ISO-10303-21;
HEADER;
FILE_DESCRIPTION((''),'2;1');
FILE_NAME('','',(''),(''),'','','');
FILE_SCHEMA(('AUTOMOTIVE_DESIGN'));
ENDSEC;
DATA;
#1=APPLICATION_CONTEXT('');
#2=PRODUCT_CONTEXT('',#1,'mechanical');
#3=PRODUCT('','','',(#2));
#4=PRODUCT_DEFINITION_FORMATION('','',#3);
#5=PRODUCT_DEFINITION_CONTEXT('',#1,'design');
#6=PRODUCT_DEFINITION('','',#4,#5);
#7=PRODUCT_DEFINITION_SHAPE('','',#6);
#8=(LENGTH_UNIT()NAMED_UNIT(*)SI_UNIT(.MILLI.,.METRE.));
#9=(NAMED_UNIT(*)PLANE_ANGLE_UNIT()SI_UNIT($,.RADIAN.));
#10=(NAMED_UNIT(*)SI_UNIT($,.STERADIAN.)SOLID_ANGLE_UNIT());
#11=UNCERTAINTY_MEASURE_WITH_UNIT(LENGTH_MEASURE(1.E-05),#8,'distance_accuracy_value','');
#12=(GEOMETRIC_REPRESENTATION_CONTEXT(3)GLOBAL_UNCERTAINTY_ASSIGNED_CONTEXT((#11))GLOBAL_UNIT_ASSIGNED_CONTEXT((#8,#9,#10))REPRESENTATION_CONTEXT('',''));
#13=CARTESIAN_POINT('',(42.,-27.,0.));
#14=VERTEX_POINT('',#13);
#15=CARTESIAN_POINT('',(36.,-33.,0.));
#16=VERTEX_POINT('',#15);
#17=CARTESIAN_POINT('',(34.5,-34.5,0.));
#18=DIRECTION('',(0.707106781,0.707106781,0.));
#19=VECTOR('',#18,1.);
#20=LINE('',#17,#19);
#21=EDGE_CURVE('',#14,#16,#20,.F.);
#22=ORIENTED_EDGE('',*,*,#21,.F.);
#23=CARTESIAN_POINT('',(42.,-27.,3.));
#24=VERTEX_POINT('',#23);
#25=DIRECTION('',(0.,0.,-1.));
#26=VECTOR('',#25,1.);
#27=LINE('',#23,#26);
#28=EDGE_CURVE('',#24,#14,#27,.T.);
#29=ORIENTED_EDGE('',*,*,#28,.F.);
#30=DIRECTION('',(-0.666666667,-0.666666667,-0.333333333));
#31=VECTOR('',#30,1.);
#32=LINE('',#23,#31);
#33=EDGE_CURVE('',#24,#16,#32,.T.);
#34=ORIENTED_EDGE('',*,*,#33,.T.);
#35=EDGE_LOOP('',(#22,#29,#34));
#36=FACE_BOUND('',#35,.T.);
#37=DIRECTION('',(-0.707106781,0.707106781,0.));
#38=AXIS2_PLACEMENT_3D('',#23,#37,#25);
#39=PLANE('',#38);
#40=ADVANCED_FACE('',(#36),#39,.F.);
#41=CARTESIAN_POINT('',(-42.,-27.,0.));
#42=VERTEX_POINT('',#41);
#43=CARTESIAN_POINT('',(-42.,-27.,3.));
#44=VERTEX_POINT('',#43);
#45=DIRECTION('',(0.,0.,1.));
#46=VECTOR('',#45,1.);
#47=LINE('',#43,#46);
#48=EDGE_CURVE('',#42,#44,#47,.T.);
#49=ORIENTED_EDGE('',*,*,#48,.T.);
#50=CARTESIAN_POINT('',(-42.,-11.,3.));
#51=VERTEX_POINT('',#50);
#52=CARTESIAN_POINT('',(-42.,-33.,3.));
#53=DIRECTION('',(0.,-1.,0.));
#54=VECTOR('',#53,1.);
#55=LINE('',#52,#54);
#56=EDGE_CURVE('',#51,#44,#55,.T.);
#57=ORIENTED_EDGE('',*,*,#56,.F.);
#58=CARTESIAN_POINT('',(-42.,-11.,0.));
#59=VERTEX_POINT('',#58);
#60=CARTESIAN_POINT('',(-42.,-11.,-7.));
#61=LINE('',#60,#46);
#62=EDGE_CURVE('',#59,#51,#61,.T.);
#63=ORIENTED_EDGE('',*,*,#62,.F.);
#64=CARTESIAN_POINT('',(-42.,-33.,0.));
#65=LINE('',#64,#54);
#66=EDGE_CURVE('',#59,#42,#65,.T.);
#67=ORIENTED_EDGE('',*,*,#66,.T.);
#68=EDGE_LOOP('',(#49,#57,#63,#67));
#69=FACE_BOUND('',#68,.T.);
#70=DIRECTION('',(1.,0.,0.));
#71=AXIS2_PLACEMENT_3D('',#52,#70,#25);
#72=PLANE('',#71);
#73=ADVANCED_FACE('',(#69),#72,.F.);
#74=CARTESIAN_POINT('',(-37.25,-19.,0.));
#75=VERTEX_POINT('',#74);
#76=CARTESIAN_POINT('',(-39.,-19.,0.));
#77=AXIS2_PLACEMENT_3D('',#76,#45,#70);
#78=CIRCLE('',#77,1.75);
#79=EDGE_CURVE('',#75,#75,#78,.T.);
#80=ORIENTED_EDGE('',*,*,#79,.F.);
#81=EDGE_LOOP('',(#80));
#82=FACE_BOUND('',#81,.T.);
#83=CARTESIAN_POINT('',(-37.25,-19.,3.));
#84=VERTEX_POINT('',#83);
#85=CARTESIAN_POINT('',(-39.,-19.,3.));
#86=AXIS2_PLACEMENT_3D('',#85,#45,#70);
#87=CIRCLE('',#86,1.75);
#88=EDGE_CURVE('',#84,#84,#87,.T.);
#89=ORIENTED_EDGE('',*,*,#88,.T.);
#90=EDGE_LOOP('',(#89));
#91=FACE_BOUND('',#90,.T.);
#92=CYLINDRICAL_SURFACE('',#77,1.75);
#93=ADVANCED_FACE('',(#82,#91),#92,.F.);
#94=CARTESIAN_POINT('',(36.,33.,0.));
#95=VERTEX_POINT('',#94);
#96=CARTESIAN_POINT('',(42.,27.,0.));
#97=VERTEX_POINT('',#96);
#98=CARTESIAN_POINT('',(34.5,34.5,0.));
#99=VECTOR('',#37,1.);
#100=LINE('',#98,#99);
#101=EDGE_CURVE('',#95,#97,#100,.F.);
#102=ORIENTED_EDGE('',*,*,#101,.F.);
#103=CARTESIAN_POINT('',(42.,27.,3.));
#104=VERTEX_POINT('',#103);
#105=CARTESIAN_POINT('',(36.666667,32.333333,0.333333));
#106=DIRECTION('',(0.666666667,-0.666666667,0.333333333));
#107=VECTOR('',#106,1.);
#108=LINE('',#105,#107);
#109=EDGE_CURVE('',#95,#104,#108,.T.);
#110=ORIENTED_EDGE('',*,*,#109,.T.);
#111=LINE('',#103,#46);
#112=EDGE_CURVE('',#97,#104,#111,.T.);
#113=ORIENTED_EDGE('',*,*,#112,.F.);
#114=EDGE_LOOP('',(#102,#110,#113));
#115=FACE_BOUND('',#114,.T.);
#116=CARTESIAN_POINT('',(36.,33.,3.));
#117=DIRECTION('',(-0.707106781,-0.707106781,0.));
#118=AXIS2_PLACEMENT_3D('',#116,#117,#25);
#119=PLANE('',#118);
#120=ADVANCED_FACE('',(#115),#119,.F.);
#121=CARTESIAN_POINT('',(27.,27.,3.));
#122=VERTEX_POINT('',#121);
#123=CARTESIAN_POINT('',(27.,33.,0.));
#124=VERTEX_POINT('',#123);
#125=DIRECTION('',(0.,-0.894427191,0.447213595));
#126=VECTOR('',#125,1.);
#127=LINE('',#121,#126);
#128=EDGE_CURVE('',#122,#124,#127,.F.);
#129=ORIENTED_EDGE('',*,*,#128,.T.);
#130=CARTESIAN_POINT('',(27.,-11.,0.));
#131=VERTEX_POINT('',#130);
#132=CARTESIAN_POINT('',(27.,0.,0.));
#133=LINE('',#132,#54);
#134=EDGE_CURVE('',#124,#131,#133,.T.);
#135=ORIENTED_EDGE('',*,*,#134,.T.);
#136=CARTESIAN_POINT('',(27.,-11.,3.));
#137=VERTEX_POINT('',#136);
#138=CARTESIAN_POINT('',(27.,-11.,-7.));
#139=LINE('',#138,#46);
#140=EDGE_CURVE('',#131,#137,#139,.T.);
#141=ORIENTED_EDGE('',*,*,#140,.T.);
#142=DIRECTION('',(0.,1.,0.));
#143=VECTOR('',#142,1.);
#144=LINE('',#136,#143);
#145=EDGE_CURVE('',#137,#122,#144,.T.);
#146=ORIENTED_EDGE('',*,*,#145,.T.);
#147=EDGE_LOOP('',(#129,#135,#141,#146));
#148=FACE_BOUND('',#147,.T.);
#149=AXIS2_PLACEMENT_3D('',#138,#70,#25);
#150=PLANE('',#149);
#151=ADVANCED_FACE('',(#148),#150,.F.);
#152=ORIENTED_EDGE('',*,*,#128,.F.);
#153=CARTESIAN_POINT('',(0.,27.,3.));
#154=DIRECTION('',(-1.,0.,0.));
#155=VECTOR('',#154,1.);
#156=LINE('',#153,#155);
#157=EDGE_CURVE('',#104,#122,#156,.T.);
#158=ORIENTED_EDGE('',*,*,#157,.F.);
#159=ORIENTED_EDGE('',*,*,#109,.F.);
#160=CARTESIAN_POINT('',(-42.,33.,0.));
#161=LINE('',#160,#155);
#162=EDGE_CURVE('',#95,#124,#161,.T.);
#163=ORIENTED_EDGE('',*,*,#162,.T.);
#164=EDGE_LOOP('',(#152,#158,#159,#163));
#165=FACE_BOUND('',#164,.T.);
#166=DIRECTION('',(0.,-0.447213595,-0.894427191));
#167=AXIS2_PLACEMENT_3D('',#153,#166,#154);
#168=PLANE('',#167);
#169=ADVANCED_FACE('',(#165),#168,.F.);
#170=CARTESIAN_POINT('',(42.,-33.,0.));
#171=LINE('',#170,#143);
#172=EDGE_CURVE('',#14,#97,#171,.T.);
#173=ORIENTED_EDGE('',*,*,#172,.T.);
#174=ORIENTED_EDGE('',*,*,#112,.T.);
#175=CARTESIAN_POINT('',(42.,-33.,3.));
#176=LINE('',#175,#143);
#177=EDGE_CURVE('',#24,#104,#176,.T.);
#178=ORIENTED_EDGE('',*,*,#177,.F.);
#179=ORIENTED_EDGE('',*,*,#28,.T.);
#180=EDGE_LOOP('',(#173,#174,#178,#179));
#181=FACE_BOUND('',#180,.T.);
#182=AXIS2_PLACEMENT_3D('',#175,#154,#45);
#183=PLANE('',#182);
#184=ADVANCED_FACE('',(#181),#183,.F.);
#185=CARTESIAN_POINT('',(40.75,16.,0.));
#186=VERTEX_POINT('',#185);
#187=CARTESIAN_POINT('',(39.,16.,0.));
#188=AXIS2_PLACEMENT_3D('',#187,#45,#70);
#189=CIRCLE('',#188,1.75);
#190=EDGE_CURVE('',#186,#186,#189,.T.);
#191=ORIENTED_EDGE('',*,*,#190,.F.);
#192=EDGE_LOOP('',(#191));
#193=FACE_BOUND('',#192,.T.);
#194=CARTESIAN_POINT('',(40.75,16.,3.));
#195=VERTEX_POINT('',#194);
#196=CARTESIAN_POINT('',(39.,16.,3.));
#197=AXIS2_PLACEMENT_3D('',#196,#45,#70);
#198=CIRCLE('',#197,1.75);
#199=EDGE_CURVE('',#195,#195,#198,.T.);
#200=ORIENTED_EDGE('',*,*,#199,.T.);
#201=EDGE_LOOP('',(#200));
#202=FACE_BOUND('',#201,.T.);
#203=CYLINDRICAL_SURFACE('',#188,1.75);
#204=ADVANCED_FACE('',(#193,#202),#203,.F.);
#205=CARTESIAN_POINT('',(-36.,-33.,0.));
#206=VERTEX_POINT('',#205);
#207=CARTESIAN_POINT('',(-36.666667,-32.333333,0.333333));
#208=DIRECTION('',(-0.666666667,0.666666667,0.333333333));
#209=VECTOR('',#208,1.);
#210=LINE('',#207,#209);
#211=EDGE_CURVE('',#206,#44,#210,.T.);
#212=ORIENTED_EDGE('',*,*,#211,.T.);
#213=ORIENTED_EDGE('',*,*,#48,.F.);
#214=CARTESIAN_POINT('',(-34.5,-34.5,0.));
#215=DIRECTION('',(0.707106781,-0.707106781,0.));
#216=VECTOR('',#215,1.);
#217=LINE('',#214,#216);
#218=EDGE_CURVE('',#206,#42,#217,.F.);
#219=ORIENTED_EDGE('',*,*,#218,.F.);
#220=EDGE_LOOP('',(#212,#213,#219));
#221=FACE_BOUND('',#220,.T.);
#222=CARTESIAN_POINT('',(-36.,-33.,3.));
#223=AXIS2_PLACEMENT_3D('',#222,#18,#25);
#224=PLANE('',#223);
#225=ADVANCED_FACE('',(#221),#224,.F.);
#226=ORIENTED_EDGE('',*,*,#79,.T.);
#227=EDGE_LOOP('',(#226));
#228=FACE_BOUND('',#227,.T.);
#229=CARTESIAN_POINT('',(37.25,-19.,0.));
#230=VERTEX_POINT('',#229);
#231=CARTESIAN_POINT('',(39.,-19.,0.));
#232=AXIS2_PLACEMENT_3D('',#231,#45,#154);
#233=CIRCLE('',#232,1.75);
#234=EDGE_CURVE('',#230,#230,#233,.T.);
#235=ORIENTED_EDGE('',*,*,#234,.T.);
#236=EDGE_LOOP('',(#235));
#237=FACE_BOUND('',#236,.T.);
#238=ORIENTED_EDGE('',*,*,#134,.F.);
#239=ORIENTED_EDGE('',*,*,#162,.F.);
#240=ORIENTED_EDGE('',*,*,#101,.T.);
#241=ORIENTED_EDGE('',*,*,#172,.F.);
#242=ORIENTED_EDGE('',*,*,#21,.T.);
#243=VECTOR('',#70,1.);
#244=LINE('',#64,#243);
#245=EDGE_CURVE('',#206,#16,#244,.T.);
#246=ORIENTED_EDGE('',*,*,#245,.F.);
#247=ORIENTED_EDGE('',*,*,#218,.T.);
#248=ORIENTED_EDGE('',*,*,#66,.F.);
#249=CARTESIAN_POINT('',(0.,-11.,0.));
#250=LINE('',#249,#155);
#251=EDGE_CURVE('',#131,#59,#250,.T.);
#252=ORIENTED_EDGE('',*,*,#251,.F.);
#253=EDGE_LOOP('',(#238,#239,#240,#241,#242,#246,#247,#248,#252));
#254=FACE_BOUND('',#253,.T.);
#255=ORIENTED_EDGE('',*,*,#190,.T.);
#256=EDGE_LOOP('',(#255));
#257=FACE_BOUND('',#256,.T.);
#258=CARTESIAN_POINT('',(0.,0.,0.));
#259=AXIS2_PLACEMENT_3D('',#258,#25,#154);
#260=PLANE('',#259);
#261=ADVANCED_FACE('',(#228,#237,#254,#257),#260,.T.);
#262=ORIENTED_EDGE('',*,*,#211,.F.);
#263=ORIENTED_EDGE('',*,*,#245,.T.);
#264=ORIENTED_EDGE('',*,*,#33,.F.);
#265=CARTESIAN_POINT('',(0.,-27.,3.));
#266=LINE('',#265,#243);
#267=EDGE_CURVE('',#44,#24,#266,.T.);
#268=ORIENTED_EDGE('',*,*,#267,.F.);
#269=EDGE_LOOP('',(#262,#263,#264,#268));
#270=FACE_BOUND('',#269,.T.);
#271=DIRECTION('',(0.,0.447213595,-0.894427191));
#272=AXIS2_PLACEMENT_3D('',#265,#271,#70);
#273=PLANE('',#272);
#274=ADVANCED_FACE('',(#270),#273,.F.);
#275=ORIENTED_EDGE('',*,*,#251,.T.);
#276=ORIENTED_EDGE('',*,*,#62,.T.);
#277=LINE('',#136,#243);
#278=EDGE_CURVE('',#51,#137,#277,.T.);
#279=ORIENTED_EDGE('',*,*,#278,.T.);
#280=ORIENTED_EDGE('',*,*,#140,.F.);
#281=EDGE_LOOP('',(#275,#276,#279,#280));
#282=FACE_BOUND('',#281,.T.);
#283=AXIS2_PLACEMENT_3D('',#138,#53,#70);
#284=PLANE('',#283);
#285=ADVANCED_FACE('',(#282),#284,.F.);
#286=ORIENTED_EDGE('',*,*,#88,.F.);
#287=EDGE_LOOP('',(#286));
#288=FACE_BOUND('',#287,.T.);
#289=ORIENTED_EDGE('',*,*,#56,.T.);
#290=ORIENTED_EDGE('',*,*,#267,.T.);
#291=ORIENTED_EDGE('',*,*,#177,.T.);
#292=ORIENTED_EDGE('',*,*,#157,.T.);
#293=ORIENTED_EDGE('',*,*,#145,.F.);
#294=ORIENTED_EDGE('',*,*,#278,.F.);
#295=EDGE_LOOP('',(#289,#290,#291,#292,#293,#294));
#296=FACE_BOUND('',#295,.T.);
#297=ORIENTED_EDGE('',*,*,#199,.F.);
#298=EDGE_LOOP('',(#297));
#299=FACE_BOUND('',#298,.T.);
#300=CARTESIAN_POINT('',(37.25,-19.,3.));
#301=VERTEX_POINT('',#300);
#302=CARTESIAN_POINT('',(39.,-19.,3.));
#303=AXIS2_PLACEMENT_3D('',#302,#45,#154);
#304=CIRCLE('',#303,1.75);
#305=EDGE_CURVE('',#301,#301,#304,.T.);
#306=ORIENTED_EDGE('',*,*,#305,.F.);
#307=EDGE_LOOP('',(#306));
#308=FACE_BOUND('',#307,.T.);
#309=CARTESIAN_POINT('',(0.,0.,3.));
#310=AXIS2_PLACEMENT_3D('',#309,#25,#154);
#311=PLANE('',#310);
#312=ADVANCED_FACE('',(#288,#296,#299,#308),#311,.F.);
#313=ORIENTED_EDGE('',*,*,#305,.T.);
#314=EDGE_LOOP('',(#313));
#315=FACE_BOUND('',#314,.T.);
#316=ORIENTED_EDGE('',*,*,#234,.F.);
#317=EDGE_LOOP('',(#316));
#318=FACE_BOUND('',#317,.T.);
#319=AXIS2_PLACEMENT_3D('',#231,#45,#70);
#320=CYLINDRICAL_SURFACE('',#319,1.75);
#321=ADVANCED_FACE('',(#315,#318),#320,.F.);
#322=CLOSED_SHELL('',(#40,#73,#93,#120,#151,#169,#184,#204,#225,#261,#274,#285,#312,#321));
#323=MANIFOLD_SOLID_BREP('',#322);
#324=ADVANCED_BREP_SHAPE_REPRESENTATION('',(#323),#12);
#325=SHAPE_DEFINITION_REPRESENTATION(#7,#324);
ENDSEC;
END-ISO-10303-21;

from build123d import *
from OCP.BRepFilletAPI import BRepFilletAPI_MakeChamfer

# Parameters (mm, degrees)
SKETCH1_W           = 84
SKETCH1_H           = 66
BOSS_EXTRUDE1_DEPTH = 3
CHAMFER2_SIZE       = 6
CHAMFER4_SIZE       = 3
CHAMFER4_SIZE_2     = 6
SKETCH2_R           = 1.75
CUT_EXTRUDE1_DEPTH  = 54.4976635
SKETCH3_W           = 69
SKETCH3_H           = 44
CUT_EXTRUDE2_DEPTH  = 10


with BuildPart() as part:
    # Sketch1 → Boss-Extrude1 (new body)
    with BuildSketch(Plane.XY):
        Rectangle(SKETCH1_W, SKETCH1_H)
    extrude(amount=BOSS_EXTRUDE1_DEPTH)

    # Chamfer2
    chamfer2_edges = [part.edges().sort_by_distance(p)[0] for p in [
        (42, -33, 1.5),
        (-42, -33, 1.5),
        (-42, 33, 1.5),
        (42, 33, 1.5),
    ]]
    chamfer(chamfer2_edges, length=CHAMFER2_SIZE)

    # Chamfer4
    chamfer4_edges_1 = [part.edges().sort_by_distance(p)[0] for p in [
        (0, -33, 3),
    ]]
    chamfer4_side_1 = [part.faces().sort_by_distance(p)[0] for p in [
        (0, -33, 2.94),
    ]]
    chamfer4_edges_2 = [part.edges().sort_by_distance(p)[0] for p in [
        (0, 33, 3),
    ]]
    chamfer4_side_2 = [part.faces().sort_by_distance(p)[0] for p in [
        (0, 32.94, 3),
    ]]
    chamfer4 = BRepFilletAPI_MakeChamfer(part.part.solid().wrapped)
    for e in chamfer4_edges_1:
        chamfer4.Add(CHAMFER4_SIZE - 0.0001, CHAMFER4_SIZE_2 - 0.0001, e.wrapped, chamfer4_side_1[0].wrapped)
    for e in chamfer4_edges_2:
        chamfer4.Add(CHAMFER4_SIZE_2 - 0.0001, CHAMFER4_SIZE - 0.0001, e.wrapped, chamfer4_side_2[0].wrapped)
    add(Compound.cast(chamfer4.Shape()), mode=Mode.REPLACE)  # a hair under: the kernel refuses the full size

    # Sketch2 → Cut-Extrude1 (cut, through all)
    with BuildSketch(Plane.XY.offset(3)):
        with Locations((-39, -19)):
            Circle(SKETCH2_R)
        with Locations(Location((39, -19, 0), (0, 0, 180))):
            Circle(SKETCH2_R)
        with Locations((39, 16)):
            Circle(SKETCH2_R)
        with Locations(Location((-39, 16, 0), (0, 0, 180))):
            Circle(SKETCH2_R)
    extrude(amount=-CUT_EXTRUDE1_DEPTH, mode=Mode.SUBTRACT)

    # Sketch3 → Cut-Extrude2 (cut)
    with BuildSketch(Plane.XY.offset(3)):
        with Locations((-7.5, 11)):
            Rectangle(SKETCH3_W, SKETCH3_H)
    extrude(amount=-CUT_EXTRUDE2_DEPTH, mode=Mode.SUBTRACT)


solid = part.part
